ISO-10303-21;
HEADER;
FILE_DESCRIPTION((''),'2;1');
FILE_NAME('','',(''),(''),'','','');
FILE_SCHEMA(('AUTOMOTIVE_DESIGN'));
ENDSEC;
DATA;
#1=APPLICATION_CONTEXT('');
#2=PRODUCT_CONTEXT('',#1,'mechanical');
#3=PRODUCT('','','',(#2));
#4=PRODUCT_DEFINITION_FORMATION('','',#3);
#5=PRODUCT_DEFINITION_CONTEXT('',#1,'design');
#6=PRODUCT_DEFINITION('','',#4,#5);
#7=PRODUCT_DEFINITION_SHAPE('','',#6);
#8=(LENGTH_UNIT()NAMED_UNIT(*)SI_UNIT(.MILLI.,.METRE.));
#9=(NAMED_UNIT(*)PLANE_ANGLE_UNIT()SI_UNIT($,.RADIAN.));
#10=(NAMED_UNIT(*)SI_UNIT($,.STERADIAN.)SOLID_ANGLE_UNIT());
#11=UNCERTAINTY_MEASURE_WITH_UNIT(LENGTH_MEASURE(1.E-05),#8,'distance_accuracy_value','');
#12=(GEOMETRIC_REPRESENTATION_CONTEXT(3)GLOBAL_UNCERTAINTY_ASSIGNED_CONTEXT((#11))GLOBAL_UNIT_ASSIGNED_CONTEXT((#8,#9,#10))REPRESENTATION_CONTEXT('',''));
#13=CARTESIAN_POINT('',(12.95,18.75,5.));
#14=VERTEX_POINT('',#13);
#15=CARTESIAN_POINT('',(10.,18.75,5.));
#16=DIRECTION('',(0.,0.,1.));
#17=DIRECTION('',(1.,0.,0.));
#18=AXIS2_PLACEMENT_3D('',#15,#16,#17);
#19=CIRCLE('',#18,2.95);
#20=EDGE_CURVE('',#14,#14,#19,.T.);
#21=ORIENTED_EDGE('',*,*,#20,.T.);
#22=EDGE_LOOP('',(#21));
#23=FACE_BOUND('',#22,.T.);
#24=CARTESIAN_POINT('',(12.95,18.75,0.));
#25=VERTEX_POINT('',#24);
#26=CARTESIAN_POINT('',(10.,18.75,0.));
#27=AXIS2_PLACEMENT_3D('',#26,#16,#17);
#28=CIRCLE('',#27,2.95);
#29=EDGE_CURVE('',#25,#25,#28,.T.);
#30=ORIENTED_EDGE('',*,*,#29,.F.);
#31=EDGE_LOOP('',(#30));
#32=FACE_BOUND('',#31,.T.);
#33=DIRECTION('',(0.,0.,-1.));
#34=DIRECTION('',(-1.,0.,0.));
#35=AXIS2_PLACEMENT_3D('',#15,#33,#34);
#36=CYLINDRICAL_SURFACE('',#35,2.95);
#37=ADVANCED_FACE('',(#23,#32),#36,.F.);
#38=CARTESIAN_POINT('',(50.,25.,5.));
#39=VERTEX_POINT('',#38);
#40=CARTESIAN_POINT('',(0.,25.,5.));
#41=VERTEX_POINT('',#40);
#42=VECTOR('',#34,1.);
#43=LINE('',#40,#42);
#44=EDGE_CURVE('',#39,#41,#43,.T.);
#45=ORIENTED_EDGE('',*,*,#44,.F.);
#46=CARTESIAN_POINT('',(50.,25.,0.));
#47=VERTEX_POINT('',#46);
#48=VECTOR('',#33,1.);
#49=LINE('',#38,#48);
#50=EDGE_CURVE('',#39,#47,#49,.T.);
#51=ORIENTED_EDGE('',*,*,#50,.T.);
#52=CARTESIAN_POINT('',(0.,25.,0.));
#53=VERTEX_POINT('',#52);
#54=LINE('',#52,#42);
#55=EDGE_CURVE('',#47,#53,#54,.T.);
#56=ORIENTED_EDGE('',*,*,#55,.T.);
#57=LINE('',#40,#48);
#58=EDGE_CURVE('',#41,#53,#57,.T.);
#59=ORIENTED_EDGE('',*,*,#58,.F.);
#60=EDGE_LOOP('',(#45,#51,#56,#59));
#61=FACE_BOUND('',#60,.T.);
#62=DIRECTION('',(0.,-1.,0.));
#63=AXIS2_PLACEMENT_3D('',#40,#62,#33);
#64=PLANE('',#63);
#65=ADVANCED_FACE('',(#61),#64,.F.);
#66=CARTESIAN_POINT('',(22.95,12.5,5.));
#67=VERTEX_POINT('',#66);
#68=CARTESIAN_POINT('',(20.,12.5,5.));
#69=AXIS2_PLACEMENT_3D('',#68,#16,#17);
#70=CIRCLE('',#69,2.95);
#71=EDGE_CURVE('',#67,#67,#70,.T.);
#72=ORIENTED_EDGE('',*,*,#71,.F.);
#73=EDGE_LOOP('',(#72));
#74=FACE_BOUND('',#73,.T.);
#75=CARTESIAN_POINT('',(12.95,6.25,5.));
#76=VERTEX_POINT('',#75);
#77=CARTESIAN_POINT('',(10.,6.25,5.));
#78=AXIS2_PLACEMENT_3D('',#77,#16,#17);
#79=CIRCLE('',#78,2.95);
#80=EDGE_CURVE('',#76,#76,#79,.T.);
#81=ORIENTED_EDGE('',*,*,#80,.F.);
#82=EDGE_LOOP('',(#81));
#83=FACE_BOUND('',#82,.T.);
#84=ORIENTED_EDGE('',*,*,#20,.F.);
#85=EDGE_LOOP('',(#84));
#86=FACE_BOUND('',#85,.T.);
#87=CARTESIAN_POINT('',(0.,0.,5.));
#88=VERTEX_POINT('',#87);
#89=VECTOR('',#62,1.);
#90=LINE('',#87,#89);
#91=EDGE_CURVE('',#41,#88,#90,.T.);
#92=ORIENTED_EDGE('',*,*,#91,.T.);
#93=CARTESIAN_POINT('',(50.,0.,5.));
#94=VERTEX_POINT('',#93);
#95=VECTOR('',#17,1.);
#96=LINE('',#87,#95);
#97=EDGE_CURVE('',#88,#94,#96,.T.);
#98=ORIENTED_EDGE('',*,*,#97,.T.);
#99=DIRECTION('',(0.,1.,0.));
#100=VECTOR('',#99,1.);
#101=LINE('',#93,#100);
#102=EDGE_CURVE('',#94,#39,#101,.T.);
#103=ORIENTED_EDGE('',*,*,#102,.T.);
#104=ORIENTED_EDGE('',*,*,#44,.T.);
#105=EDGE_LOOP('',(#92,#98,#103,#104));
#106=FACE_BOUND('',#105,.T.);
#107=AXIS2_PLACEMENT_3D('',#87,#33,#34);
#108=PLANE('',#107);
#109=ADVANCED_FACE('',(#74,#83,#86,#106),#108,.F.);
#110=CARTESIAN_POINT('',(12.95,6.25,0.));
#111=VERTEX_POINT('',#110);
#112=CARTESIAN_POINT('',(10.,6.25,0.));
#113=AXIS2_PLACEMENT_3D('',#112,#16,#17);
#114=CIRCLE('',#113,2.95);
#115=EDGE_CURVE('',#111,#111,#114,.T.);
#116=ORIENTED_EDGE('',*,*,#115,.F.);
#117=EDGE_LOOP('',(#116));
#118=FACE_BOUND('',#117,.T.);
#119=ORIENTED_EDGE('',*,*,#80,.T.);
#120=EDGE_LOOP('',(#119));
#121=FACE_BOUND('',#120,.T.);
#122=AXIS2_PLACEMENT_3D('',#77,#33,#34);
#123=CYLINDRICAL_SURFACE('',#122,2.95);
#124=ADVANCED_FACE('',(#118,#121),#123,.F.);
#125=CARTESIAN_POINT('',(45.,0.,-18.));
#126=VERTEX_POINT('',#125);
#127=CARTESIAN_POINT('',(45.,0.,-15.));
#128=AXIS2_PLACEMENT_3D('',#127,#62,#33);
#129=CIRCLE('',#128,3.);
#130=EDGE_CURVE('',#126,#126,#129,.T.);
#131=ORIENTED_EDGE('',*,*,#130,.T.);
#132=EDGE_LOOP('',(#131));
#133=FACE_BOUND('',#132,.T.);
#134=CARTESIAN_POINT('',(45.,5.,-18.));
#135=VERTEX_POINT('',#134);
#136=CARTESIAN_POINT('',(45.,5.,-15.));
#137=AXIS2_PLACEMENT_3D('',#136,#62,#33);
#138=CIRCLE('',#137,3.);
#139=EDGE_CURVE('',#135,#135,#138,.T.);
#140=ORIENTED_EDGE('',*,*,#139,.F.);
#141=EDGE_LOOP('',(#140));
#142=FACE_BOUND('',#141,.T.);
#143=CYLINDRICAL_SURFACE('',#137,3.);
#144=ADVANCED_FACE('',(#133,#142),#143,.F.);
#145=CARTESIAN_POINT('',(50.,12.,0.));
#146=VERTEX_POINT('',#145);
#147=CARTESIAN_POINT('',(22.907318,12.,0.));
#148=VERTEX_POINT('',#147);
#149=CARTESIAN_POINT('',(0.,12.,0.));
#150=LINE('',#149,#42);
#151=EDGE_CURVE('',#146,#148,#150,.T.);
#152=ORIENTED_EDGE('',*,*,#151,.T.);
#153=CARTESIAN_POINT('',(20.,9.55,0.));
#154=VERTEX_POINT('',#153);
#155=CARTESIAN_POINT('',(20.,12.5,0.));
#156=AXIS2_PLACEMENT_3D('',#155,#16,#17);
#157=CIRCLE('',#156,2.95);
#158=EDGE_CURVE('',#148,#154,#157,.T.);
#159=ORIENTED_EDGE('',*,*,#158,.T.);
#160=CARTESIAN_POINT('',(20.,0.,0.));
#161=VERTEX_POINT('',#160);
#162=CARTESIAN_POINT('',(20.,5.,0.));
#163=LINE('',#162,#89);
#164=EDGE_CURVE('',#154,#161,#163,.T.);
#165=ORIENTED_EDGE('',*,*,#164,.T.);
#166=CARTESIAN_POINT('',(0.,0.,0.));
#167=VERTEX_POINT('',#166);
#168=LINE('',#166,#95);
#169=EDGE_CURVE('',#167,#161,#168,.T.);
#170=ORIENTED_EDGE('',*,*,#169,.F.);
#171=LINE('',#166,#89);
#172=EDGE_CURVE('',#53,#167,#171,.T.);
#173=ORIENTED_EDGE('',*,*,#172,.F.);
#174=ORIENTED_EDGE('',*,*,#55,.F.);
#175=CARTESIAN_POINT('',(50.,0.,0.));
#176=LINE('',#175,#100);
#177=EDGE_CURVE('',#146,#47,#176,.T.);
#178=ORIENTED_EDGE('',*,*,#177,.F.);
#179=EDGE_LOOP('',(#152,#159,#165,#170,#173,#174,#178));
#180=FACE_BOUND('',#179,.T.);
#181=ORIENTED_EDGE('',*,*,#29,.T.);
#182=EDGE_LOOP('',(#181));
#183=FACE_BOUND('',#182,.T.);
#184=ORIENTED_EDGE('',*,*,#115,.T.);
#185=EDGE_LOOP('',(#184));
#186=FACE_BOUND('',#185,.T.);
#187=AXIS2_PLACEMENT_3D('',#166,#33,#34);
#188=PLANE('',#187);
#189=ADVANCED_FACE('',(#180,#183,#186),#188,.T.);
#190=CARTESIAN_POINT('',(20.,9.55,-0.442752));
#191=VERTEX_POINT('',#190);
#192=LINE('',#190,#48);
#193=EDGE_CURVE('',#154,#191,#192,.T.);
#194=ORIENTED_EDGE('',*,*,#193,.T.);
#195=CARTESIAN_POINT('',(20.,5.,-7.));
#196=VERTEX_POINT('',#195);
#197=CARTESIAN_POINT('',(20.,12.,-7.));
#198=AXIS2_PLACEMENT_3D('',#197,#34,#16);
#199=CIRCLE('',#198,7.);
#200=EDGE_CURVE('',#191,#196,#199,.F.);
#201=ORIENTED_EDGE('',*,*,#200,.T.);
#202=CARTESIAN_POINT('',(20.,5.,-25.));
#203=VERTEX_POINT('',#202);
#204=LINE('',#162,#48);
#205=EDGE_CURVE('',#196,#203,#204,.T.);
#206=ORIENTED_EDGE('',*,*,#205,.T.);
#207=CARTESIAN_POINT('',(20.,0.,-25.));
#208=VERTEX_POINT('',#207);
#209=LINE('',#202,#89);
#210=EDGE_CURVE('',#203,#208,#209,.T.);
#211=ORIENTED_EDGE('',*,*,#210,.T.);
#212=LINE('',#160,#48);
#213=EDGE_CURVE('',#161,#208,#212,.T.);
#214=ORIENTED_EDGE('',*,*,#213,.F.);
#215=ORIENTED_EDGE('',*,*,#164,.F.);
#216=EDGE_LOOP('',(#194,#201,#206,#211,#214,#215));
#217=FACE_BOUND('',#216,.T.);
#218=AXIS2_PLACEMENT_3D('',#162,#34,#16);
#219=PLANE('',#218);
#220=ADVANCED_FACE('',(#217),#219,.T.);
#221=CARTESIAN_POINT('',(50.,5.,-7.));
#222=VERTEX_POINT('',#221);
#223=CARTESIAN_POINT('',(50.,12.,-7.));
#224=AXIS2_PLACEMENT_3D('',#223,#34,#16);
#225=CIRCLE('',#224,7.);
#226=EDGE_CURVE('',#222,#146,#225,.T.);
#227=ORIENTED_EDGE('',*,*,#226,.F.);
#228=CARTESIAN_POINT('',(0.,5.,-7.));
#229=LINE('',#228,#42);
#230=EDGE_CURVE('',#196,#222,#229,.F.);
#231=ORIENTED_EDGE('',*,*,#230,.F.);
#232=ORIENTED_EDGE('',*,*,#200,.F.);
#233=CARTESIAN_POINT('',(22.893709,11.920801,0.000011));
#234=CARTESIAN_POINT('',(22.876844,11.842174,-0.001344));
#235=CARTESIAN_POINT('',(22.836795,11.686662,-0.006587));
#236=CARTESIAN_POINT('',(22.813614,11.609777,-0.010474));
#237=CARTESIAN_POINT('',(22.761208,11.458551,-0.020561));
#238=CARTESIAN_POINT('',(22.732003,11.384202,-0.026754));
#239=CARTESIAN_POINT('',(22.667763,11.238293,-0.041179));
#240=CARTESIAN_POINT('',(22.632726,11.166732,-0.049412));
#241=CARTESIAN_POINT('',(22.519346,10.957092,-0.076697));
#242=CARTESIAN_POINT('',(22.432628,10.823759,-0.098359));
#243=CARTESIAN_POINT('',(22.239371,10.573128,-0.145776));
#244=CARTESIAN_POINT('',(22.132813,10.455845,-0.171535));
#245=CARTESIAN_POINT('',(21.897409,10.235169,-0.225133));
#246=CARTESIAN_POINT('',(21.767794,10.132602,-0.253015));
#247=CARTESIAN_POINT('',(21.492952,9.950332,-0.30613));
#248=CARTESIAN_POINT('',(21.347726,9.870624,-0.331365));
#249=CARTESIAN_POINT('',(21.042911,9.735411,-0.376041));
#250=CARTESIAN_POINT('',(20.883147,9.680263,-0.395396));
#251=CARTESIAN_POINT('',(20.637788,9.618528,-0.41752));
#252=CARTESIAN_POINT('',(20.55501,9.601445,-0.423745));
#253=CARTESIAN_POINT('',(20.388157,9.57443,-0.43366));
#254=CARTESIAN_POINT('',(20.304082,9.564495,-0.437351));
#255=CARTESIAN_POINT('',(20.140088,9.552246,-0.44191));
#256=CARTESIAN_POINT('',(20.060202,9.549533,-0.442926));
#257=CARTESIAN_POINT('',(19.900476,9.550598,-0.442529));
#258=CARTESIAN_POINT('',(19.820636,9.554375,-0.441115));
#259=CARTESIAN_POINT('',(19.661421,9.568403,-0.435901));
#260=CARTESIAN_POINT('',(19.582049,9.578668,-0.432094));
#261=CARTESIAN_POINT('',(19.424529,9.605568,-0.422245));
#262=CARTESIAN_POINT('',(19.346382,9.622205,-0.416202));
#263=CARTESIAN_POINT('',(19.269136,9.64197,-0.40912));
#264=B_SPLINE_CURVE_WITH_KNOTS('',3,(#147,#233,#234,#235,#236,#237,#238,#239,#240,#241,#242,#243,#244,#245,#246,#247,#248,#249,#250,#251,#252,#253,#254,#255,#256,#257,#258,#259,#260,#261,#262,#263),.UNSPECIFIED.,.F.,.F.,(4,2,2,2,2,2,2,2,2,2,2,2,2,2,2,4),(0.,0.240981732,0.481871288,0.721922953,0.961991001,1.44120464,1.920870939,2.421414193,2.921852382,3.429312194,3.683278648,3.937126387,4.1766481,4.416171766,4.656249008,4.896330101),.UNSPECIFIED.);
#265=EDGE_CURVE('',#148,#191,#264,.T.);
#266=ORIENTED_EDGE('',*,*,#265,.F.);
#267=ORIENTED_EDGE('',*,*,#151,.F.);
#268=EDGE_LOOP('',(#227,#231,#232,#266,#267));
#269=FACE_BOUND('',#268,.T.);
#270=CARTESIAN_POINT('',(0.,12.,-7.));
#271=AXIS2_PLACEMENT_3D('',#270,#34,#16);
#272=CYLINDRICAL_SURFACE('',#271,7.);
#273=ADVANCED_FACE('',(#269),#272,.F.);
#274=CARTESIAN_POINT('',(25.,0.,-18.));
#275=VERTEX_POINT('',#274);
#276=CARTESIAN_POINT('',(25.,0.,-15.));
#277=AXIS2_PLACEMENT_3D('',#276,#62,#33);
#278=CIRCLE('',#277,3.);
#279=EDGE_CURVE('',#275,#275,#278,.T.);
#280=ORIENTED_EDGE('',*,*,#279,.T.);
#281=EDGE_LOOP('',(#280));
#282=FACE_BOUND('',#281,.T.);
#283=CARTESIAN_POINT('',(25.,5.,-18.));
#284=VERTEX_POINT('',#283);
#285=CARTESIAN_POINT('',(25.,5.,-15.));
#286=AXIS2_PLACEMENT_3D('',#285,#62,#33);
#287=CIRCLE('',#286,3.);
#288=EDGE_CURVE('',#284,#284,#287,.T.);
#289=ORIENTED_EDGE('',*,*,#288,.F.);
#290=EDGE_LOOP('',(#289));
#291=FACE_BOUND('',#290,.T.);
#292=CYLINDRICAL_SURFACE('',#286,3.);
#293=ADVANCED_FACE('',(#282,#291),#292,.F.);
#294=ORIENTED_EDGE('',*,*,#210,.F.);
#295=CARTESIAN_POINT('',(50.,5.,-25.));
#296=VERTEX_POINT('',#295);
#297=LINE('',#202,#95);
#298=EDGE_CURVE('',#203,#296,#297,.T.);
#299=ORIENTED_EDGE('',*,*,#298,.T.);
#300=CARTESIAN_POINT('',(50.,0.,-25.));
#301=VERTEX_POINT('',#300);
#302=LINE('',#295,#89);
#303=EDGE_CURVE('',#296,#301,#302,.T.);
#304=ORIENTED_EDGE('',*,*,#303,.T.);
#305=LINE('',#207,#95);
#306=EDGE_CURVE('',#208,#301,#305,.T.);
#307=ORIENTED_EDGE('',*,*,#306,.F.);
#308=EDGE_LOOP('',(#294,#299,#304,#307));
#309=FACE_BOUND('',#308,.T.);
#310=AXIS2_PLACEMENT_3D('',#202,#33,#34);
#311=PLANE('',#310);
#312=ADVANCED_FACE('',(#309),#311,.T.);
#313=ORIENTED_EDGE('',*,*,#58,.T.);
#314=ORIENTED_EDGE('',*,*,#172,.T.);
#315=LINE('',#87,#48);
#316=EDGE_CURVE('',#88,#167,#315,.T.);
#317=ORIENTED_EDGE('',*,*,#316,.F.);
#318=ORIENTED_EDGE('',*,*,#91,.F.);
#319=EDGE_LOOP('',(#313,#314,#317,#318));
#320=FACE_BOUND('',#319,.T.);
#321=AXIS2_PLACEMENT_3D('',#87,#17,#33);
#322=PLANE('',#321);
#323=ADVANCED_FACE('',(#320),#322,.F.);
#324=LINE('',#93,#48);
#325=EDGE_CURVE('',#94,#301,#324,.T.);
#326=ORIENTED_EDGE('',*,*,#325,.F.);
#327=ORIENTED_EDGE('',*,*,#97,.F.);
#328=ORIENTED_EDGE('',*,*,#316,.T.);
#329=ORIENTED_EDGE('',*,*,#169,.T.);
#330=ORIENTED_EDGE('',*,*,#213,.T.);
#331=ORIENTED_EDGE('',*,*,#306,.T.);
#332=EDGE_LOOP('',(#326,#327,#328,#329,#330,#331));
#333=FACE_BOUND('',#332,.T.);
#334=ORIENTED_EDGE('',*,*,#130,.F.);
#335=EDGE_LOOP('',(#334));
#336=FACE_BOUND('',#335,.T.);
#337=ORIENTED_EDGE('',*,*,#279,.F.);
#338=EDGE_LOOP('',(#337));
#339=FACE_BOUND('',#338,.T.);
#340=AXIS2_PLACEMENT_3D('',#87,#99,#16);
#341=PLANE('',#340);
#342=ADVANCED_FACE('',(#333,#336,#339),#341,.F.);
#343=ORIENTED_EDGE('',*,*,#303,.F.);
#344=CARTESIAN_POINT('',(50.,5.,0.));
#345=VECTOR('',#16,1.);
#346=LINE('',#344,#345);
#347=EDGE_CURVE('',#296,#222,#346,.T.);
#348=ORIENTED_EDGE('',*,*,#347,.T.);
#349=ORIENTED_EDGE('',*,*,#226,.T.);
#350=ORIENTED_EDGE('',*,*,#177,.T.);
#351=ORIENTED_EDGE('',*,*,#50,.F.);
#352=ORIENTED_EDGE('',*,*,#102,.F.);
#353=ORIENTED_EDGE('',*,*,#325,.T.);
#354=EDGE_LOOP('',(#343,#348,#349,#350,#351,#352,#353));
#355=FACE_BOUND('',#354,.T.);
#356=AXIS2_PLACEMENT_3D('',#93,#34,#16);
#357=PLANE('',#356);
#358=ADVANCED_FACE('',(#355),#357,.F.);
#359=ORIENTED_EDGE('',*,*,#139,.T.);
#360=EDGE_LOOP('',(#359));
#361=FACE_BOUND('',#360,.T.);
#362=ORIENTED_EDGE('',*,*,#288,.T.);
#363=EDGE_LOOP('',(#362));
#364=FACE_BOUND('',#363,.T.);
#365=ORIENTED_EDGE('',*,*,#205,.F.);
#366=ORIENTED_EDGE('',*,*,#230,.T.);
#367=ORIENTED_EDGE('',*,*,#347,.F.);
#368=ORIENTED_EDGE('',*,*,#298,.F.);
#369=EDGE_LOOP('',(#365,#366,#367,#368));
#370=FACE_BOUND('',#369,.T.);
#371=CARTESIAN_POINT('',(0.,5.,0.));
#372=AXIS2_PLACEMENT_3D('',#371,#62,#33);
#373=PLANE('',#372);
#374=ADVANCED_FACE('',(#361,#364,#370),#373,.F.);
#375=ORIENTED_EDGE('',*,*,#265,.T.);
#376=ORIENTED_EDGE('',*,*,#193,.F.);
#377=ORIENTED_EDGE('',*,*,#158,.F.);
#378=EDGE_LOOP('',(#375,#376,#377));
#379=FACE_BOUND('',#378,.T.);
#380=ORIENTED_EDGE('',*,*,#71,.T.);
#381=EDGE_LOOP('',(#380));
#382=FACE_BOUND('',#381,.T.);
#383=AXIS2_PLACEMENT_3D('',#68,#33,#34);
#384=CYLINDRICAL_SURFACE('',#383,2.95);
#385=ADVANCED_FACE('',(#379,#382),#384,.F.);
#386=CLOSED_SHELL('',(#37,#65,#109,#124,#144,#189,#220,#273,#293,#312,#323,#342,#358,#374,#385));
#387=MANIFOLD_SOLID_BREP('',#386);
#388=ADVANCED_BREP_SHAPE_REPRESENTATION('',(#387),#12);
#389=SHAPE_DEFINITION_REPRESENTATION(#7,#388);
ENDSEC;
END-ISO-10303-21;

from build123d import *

# Parameters (mm, degrees)
CROQUIS1_W              = 50
CROQUIS1_H              = 25
CROQUIS1_R              = 2.95
SALIENTE_EXTRUIR1_DEPTH = 5
CROQUIS2_W              = 30
CROQUIS2_H              = 25
CROQUIS2_R              = 3
SALIENTE_EXTRUIR2_DEPTH = 5
REDONDEO1_R             = 7


with BuildPart() as part:
    # Croquis1 → Saliente-Extruir1 (new body)
    with BuildSketch(Plane.XY):
        with Locations((25, 12.5)):
            Rectangle(CROQUIS1_W, CROQUIS1_H)
        with Locations((10, 18.75)):
            Circle(CROQUIS1_R, mode=Mode.SUBTRACT)
        with Locations((10, 6.25)):
            Circle(CROQUIS1_R, mode=Mode.SUBTRACT)
        with Locations((20, 12.5)):
            Circle(CROQUIS1_R, mode=Mode.SUBTRACT)
    extrude(amount=SALIENTE_EXTRUIR1_DEPTH)

    # Croquis2 → Saliente-Extruir2 (add)
    with BuildSketch(Plane.XZ):
        with Locations((35, -12.5)):
            Rectangle(CROQUIS2_W, CROQUIS2_H)
        with Locations(Location((45, -15, 0), (0, 0, 270))):
            Circle(CROQUIS2_R, mode=Mode.SUBTRACT)
        with Locations(Location((25, -15, 0), (0, 0, 270))):
            Circle(CROQUIS2_R, mode=Mode.SUBTRACT)
    extrude(amount=-SALIENTE_EXTRUIR2_DEPTH)

    # Redondeo1
    # the kernel refuses this fillet: 7 mm, written as the material it adds along each edge
    with BuildSketch(Plane(origin=(20, 5, 0), x_dir=(0, 0, -1), z_dir=(1, 0, 0))) as redondeo1_piece_1_section:
        with BuildLine():
            CenterArc((REDONDEO1_R, REDONDEO1_R), REDONDEO1_R, 180, 90)
            Line((0, REDONDEO1_R), (0, 0))
            Line((0, 0), (REDONDEO1_R, 0))
        make_face()
    redondeo1_piece_1 = extrude(amount=30, mode=Mode.PRIVATE)
    redondeo1_piece_1 = redondeo1_piece_1 - Plane(origin=(20, 12.5, -1.59035859), x_dir=(1, 0, 0), z_dir=(0, 0, -1)) * Cylinder(2.95, 88, mode=Mode.PRIVATE)
    add(redondeo1_piece_1)


solid = part.part
